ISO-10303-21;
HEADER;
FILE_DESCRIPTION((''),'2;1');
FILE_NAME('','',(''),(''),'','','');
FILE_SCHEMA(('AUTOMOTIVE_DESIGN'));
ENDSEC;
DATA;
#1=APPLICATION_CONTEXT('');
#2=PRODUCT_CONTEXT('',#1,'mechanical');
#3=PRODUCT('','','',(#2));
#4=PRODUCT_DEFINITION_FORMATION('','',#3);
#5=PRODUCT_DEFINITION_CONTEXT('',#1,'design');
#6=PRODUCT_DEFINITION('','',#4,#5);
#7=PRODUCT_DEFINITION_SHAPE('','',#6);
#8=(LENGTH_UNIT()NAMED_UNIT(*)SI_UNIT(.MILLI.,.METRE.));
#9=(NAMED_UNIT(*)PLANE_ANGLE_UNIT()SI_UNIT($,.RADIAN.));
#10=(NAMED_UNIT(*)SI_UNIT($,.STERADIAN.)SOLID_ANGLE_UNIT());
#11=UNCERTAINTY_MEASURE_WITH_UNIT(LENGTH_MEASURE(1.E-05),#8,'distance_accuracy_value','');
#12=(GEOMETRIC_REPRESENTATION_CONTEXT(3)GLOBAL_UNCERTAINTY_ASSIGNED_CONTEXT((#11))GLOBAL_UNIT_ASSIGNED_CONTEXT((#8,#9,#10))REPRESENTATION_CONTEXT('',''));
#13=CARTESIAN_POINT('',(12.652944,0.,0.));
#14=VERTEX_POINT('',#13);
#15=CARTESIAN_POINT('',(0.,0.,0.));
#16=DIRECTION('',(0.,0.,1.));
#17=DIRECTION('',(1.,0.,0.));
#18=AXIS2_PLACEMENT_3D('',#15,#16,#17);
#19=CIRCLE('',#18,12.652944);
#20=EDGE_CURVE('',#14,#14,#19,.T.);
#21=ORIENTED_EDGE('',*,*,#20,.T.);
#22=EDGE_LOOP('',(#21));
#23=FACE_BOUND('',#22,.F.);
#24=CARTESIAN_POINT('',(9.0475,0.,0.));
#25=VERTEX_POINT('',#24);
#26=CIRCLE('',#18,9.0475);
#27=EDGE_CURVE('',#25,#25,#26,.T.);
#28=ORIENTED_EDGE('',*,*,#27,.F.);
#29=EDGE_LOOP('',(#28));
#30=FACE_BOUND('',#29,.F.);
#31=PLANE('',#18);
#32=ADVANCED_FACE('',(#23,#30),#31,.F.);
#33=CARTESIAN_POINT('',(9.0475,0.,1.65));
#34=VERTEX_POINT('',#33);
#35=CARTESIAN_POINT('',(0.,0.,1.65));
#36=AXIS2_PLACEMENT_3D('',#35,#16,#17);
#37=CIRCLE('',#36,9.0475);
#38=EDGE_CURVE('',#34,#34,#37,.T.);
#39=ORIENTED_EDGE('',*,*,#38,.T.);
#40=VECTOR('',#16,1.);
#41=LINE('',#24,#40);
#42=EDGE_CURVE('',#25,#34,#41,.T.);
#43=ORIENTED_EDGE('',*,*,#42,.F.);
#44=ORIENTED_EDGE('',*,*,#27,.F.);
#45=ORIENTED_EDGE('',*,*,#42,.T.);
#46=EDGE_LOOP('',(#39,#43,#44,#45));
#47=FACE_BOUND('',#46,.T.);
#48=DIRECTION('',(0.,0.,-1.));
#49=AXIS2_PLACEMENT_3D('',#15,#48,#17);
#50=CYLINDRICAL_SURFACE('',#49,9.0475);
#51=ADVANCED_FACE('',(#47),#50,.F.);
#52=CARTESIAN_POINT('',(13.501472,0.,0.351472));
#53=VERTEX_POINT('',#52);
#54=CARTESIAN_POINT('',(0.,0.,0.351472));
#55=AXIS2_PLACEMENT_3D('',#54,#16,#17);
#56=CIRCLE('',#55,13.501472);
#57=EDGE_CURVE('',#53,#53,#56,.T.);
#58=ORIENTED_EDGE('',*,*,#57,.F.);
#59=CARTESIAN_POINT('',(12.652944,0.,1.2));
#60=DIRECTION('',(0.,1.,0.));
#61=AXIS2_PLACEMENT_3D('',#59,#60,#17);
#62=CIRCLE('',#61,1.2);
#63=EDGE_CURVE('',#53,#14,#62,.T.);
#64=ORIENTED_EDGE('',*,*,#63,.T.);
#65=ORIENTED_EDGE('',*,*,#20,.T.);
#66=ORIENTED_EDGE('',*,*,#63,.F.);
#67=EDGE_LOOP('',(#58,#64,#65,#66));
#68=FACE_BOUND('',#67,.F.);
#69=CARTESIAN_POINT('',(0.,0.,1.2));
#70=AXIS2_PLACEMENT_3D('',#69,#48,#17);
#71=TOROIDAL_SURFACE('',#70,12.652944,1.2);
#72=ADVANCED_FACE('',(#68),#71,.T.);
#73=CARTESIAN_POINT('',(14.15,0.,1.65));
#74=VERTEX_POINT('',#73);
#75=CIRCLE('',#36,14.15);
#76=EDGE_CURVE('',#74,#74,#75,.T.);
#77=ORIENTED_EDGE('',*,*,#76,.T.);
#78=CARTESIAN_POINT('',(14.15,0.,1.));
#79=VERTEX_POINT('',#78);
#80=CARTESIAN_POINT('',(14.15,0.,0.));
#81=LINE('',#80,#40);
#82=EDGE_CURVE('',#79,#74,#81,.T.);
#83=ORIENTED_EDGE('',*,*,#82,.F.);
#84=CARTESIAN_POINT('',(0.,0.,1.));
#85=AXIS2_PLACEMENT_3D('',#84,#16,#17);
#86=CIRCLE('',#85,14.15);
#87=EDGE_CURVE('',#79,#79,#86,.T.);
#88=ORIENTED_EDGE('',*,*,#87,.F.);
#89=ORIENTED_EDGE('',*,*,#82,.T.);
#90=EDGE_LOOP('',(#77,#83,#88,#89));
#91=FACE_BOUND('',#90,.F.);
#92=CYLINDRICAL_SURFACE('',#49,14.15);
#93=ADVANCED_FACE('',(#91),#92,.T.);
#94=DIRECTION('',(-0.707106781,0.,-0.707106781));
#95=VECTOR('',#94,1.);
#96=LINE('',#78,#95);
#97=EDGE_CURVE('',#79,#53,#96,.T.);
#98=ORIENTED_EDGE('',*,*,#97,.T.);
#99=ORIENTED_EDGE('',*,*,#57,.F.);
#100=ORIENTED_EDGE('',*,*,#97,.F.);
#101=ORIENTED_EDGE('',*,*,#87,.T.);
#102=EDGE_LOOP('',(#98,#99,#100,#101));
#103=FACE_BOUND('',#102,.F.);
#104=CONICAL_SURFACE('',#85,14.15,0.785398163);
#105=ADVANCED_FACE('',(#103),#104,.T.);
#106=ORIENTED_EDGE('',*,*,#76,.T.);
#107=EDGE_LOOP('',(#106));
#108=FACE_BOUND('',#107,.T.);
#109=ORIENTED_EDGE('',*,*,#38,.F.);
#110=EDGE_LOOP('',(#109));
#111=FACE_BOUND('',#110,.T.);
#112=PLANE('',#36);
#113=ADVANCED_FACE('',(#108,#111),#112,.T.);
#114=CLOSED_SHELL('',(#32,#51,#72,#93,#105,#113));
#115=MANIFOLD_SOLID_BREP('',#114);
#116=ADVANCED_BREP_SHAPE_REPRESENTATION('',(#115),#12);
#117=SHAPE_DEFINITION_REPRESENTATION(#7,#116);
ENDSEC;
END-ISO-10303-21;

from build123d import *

# Parameters (mm, degrees)
F0_R     = 14.15
F0_R_2   = 9.0475
F1_DEPTH = 1.65
F2_SIZE  = 1
F3_R     = 1.2


with BuildPart() as f1:
    # F0 (on Top) → F1 (new body)
    with BuildSketch(Plane.XY):
        Circle(F0_R)
        Circle(F0_R_2, mode=Mode.SUBTRACT)
    extrude(amount=F1_DEPTH)

    # F2
    f2_edges = [f1.edges().sort_by_distance(p)[0] for p in [
        (-14.15, 0, 0),
    ]]
    chamfer(f2_edges, length=F2_SIZE)

    # F3
    f3_edges = [f1.edges().sort_by_distance(p)[0] for p in [
        (-13.15, 0, 0),
    ]]
    fillet(f3_edges, radius=F3_R)


solid = f1.part
